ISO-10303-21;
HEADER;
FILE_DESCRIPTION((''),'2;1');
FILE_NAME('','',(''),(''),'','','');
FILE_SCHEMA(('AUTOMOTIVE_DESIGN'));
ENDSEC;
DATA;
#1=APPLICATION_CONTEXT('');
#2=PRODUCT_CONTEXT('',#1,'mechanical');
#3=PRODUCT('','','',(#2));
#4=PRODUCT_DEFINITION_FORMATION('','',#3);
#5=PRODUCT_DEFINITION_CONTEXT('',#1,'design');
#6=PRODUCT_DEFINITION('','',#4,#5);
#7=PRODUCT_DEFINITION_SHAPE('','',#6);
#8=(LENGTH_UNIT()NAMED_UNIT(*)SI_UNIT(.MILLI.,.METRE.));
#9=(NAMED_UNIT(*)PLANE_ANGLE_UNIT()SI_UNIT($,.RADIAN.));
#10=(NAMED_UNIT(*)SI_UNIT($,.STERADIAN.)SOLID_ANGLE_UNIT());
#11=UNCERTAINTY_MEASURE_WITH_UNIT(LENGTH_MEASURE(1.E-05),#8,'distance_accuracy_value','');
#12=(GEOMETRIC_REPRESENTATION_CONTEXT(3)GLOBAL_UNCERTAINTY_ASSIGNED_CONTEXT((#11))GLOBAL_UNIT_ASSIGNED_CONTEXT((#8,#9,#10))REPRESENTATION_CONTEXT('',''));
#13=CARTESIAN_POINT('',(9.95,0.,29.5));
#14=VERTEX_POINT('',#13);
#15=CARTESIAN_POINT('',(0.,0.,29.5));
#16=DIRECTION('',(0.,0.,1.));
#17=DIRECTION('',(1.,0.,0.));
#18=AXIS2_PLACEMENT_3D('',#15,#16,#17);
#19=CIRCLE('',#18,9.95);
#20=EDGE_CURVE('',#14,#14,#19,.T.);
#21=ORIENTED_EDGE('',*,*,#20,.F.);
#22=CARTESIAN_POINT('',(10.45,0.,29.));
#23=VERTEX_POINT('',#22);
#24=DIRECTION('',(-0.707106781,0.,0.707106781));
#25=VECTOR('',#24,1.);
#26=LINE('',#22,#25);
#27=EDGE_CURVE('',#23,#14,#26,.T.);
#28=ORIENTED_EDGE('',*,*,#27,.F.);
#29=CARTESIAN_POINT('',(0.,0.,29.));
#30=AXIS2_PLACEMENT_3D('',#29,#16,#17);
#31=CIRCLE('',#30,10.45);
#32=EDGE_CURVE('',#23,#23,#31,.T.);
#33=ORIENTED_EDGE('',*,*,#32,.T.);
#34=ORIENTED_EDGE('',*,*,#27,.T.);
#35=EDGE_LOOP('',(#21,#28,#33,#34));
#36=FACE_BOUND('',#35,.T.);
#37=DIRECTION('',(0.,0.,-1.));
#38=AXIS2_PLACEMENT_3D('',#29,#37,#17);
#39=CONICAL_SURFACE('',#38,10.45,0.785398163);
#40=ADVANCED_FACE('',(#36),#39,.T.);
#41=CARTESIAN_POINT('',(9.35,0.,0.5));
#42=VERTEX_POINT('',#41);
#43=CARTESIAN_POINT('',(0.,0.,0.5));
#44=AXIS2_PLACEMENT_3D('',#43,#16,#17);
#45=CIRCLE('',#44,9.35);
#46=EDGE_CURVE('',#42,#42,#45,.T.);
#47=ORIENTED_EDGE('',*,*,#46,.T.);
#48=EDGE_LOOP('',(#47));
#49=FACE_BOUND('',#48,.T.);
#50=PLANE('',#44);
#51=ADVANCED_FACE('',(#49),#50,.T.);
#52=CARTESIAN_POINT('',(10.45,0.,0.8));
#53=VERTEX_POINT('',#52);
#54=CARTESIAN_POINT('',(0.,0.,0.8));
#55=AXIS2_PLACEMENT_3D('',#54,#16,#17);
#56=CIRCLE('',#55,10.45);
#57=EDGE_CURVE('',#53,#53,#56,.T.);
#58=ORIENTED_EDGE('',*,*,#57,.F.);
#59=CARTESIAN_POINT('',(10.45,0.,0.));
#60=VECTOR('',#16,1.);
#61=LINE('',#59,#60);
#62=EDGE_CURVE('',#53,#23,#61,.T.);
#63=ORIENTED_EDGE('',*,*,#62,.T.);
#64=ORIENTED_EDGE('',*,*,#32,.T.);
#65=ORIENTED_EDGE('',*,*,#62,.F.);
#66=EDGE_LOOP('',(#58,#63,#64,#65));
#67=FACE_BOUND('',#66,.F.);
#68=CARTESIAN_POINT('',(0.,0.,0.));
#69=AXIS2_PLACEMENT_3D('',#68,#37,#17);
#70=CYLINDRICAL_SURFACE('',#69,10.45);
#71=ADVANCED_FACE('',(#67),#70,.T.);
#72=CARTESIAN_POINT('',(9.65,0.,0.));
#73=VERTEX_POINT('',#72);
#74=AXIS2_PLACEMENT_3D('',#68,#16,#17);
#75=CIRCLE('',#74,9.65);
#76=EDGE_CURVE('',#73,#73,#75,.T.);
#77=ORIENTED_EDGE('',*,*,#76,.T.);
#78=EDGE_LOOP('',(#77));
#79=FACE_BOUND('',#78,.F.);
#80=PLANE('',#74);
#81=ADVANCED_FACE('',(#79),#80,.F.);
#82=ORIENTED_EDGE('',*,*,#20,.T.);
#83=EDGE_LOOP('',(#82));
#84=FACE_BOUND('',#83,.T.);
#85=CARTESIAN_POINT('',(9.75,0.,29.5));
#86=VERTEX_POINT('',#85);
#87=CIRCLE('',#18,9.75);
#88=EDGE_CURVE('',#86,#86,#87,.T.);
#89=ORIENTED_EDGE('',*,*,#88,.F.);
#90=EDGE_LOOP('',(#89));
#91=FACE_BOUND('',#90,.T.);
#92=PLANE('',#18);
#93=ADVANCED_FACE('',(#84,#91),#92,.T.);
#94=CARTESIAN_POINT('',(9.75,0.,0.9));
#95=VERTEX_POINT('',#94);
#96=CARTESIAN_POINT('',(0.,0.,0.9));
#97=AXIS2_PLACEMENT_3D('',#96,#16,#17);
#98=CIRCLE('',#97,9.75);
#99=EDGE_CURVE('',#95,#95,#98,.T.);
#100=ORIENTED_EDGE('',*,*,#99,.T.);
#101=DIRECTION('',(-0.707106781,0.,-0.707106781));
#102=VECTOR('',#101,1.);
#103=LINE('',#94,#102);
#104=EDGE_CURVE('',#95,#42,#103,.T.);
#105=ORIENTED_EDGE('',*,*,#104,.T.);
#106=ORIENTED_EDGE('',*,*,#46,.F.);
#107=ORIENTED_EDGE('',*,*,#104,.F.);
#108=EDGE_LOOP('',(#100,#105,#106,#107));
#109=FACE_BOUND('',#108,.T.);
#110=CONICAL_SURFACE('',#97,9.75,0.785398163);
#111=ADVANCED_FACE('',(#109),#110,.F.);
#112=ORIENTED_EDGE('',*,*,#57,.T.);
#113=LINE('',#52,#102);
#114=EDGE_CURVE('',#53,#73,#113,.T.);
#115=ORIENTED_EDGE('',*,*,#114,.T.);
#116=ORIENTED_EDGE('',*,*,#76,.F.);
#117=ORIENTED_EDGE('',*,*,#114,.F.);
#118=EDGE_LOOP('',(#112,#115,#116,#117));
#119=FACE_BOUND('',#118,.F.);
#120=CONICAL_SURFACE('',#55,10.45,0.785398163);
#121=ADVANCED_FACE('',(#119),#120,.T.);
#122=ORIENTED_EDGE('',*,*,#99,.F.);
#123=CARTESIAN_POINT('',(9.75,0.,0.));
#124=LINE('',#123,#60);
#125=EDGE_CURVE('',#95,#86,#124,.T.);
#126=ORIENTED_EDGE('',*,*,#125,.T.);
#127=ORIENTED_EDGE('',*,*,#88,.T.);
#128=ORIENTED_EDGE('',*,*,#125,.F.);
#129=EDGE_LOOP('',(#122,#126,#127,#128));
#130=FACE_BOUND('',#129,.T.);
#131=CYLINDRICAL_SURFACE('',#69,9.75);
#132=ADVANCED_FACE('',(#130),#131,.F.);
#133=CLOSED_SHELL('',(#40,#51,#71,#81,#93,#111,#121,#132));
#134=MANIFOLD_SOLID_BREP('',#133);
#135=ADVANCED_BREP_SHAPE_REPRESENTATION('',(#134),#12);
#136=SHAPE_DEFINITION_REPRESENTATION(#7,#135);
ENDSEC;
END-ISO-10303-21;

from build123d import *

# Parameters (mm, degrees)
F0_R     = 9.75
F1_DEPTH = 0.5
F0_R_2   = 10.45
F2_DEPTH = 29.5
F3_SIZE  = 0.5
F4_SIZE  = 0.4
F5_SIZE  = 0.8


with BuildPart() as f1:
    # F0 (on Top) → F1 (new body)
    with BuildSketch(Plane.XY):
        Circle(F0_R)
    extrude(amount=F1_DEPTH)

    # F0 (on Top) → F2 (join)
    with BuildSketch(Plane.XY):
        Circle(F0_R_2)
        Circle(F0_R, mode=Mode.SUBTRACT)
    extrude(amount=F2_DEPTH)

    # F3
    f3_edges = [f1.edges().sort_by_distance(p)[0] for p in [
        (-10.45, 0, 29.5),
    ]]
    chamfer(f3_edges, length=F3_SIZE)

    # F4
    f4_edges = [f1.edges().sort_by_distance(p)[0] for p in [
        (-9.75, 0, 0.5),
    ]]
    chamfer(f4_edges, length=F4_SIZE)

    # F5
    f5_edges = [f1.edges().sort_by_distance(p)[0] for p in [
        (-10.45, 0, 0),
    ]]
    chamfer(f5_edges, length=F5_SIZE)


solid = f1.part
